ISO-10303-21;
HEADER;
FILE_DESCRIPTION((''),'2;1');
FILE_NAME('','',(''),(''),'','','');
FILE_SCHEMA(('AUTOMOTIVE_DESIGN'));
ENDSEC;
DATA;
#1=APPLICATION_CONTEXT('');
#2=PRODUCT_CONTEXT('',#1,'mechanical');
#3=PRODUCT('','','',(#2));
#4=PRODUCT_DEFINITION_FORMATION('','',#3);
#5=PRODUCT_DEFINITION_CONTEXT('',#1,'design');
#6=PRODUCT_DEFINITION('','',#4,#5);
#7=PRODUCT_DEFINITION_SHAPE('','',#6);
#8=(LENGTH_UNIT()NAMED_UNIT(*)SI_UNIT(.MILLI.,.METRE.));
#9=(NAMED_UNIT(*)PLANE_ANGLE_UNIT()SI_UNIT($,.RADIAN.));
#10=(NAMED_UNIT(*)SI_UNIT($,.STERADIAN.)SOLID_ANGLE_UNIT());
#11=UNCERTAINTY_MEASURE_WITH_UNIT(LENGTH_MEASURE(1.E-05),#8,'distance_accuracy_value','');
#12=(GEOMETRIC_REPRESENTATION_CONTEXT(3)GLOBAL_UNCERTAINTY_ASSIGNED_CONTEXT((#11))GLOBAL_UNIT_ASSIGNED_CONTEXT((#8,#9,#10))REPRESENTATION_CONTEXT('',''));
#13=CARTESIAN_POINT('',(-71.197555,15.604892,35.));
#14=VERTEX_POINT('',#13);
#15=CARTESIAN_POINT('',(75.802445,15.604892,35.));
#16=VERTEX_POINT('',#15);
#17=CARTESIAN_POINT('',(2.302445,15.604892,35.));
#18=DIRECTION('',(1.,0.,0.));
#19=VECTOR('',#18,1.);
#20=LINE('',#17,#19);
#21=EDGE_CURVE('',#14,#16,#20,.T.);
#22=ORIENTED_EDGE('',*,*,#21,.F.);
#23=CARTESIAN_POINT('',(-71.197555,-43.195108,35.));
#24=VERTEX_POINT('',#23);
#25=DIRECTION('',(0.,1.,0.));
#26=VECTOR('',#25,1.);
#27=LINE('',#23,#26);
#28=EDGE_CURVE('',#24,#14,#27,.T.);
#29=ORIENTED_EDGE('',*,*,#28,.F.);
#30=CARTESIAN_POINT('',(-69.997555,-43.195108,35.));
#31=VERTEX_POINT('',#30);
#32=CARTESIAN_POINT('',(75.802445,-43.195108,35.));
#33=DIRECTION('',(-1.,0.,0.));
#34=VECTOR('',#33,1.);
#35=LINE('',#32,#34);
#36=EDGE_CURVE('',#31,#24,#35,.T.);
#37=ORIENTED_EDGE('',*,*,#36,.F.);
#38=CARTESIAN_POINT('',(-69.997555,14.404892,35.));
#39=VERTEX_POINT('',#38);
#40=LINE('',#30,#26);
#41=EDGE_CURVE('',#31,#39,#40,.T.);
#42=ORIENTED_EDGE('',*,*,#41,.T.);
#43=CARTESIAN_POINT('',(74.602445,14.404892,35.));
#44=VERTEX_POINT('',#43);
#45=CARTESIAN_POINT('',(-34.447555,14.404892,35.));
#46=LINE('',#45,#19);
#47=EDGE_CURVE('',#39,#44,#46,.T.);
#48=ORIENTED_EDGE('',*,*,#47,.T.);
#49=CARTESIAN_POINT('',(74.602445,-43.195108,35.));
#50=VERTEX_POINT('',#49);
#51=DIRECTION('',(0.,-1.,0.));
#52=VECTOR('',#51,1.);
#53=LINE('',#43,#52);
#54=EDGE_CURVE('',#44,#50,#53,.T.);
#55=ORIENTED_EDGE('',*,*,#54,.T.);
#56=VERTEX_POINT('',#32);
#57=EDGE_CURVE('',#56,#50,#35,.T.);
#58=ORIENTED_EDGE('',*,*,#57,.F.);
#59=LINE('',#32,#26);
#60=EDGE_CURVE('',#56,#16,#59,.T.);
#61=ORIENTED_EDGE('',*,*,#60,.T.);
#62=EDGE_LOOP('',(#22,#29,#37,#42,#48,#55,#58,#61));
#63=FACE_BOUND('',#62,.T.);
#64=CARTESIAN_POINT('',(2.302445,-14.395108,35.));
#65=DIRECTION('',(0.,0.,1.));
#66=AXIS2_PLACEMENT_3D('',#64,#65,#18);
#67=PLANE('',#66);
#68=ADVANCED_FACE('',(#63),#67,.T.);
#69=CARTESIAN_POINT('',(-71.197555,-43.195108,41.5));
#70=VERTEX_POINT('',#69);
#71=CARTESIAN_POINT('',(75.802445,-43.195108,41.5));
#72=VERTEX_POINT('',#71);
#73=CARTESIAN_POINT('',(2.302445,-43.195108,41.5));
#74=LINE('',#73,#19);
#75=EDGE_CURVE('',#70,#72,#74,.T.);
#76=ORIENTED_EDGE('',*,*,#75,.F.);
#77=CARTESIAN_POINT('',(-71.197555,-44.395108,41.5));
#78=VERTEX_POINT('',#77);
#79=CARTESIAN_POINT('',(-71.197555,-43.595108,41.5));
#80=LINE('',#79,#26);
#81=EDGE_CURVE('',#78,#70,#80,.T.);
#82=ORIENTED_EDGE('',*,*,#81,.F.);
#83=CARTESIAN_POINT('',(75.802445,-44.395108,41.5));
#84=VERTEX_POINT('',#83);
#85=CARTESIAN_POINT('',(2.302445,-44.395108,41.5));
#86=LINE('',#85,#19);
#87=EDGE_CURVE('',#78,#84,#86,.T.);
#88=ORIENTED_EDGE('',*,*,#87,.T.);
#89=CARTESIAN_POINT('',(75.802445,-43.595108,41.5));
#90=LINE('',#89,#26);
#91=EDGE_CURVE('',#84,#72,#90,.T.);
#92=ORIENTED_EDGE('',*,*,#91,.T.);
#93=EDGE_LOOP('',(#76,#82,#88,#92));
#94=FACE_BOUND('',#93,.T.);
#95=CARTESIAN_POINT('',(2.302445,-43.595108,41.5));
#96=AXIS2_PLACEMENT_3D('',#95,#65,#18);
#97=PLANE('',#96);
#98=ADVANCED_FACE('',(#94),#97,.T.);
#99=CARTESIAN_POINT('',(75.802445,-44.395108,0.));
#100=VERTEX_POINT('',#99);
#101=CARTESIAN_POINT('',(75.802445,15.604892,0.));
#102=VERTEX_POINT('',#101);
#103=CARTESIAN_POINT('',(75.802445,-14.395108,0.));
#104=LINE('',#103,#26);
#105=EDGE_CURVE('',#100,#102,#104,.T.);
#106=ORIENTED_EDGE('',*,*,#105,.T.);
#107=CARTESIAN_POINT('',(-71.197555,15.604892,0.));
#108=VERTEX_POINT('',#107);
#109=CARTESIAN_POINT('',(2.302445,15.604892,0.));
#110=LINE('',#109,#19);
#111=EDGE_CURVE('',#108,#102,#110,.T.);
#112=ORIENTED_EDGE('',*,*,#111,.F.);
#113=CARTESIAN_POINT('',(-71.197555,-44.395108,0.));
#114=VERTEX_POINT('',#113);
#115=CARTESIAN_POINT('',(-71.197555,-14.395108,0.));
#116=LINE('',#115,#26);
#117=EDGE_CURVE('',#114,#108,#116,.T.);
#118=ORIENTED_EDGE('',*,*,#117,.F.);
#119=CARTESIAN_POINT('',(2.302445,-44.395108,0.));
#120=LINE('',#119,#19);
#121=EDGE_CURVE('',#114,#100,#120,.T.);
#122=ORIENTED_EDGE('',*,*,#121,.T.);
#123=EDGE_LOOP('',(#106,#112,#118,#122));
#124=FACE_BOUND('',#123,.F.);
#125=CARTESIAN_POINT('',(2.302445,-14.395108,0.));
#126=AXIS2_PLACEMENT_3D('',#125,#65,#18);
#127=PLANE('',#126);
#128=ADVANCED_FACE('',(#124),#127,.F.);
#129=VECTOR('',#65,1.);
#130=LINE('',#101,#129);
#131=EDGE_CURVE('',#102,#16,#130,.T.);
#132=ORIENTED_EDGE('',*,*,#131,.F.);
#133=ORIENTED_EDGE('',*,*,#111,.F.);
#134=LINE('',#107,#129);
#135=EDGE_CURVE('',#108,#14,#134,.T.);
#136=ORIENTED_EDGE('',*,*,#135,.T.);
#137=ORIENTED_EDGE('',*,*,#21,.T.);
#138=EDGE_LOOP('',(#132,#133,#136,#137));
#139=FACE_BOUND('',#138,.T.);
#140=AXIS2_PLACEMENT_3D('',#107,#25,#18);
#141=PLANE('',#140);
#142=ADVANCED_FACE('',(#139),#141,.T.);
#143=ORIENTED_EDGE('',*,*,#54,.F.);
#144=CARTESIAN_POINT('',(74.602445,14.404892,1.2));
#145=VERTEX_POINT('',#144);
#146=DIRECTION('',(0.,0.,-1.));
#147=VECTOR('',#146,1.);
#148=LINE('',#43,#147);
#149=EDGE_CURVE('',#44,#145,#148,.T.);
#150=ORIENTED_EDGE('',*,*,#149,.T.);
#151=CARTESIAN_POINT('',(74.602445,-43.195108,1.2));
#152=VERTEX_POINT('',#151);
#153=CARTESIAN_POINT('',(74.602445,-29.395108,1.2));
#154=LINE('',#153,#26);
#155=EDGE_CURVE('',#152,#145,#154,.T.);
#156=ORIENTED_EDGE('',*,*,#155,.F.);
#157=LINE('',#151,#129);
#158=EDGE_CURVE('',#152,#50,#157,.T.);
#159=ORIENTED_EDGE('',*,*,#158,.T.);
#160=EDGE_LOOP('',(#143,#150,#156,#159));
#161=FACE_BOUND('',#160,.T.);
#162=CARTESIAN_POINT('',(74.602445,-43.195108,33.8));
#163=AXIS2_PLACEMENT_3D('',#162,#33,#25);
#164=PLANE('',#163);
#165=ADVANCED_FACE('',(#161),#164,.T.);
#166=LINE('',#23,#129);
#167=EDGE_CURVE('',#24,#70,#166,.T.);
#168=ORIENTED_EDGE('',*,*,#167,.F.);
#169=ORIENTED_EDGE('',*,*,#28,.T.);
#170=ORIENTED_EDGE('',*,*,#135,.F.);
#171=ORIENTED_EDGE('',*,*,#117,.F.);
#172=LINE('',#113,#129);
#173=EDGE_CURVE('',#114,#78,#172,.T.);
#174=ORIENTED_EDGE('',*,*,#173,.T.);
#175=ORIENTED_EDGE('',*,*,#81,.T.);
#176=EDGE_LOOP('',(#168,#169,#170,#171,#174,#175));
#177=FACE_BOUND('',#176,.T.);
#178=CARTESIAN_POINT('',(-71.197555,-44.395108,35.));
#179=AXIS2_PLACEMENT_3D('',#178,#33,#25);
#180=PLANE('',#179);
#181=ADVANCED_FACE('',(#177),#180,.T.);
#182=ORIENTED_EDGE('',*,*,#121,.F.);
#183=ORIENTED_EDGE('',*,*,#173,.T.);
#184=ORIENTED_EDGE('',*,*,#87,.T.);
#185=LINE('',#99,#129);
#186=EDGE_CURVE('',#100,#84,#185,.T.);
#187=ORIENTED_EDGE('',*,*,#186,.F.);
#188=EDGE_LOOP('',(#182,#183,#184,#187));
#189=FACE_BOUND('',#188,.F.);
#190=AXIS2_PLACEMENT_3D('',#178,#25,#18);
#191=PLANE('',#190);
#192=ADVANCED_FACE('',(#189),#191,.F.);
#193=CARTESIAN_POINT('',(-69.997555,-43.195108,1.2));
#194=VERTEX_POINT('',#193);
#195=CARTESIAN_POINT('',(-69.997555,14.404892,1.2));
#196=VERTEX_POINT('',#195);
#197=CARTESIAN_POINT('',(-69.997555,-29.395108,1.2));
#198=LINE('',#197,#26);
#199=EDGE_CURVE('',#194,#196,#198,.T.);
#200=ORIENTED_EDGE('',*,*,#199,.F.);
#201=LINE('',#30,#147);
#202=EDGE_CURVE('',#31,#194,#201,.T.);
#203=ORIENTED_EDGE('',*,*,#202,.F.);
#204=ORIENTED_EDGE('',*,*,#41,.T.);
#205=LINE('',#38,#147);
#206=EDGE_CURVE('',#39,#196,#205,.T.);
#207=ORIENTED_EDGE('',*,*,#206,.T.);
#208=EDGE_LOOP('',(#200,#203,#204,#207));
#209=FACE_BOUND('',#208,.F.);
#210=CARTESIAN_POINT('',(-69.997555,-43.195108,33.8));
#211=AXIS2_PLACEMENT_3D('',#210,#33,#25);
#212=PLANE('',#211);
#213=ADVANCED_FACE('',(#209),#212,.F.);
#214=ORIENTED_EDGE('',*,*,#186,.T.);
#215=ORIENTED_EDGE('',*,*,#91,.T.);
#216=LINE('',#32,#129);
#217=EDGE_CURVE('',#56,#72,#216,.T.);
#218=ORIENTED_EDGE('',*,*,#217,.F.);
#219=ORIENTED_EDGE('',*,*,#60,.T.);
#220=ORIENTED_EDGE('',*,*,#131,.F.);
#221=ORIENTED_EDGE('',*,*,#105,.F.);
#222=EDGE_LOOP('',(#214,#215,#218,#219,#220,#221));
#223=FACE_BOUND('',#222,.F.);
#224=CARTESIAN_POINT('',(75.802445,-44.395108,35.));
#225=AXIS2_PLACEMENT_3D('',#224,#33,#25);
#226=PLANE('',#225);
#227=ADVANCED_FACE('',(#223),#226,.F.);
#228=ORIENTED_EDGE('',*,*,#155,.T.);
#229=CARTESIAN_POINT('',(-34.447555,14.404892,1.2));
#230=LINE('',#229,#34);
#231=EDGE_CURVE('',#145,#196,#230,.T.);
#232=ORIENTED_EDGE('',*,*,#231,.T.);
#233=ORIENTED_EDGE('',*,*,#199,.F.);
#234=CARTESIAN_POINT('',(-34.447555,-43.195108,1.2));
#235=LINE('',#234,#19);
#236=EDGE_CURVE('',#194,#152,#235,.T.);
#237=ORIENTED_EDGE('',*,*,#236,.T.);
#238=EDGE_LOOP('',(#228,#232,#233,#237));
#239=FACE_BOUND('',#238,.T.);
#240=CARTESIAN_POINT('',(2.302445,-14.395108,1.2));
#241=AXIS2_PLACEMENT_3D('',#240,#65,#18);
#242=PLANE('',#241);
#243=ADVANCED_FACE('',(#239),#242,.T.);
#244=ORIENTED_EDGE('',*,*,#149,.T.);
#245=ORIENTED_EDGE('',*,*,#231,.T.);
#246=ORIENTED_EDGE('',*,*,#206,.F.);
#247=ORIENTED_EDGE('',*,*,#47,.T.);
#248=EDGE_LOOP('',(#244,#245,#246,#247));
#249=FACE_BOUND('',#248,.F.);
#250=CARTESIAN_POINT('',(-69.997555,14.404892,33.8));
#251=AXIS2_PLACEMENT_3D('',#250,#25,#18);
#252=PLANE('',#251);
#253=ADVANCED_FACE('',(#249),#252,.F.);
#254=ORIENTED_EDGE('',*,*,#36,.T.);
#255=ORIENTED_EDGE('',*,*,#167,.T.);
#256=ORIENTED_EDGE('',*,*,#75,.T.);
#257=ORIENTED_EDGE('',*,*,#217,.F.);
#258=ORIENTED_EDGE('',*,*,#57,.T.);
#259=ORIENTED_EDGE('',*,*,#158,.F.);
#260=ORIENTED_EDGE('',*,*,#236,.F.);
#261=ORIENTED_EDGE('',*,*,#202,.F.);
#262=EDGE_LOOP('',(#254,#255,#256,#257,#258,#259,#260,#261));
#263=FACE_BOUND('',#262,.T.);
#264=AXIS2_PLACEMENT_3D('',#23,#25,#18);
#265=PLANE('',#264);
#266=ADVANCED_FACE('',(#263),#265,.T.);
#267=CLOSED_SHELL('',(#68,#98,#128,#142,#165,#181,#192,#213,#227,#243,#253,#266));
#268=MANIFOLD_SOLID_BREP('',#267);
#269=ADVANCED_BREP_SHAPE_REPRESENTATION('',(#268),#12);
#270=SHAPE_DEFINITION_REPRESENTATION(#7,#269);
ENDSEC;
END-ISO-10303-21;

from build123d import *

# Parameters (mm, degrees)
F0_W     = 147
F0_H     = 60
F1_DEPTH = 35
F2_W     = 147
F2_H     = 1.6
F3_DEPTH = 6.5
F4_T     = -1.2
F5_DEPTH = 0.4


# Not quite as in the source:
# - a shell that OpenCascade refuses in one call is made with other operations: the cavity is built on its own and cut out


with BuildPart() as f1:
    # F0 (on Top) → F1 (new body)
    with BuildSketch(Plane.XY):
        with Locations((2.3024454713, -14.3951082311)):
            Rectangle(F0_W, F0_H)
    extrude(amount=F1_DEPTH)

    # F2 (on face) → F3 (join)
    with BuildSketch(Plane.XY.offset(35)):
        with Locations((2.3024454713, -43.5951082311)):
            Rectangle(F2_W, F2_H)
    extrude(amount=F3_DEPTH)

    # F4: a shell. OpenCascade refuses it in one call, so the cavity is built on its own and cut out:
    # the body offset inwards by the wall thickness, plus a prism from it out through each open face.
    f4_core = offset(f1.part, amount=F4_T, kind=Kind.INTERSECTION, mode=Mode.PRIVATE)
    f4_exits = [f4_core.faces().sort_by_distance(p)[0] for p in [
        (2.302445, -14.395108, 33.8),
    ]]
    add(f4_core, mode=Mode.SUBTRACT)
    extrude(f4_exits, amount=-F4_T, mode=Mode.SUBTRACT)

    # F5 (cut): a face of the model
    f5_faces = [f1.faces().sort_by_distance(p)[0] for p in [
        (2.3024454713, -42.7951082311, 38.25),
    ]]
    extrude(f5_faces, amount=-F5_DEPTH, mode=Mode.SUBTRACT)


solid = f1.part
